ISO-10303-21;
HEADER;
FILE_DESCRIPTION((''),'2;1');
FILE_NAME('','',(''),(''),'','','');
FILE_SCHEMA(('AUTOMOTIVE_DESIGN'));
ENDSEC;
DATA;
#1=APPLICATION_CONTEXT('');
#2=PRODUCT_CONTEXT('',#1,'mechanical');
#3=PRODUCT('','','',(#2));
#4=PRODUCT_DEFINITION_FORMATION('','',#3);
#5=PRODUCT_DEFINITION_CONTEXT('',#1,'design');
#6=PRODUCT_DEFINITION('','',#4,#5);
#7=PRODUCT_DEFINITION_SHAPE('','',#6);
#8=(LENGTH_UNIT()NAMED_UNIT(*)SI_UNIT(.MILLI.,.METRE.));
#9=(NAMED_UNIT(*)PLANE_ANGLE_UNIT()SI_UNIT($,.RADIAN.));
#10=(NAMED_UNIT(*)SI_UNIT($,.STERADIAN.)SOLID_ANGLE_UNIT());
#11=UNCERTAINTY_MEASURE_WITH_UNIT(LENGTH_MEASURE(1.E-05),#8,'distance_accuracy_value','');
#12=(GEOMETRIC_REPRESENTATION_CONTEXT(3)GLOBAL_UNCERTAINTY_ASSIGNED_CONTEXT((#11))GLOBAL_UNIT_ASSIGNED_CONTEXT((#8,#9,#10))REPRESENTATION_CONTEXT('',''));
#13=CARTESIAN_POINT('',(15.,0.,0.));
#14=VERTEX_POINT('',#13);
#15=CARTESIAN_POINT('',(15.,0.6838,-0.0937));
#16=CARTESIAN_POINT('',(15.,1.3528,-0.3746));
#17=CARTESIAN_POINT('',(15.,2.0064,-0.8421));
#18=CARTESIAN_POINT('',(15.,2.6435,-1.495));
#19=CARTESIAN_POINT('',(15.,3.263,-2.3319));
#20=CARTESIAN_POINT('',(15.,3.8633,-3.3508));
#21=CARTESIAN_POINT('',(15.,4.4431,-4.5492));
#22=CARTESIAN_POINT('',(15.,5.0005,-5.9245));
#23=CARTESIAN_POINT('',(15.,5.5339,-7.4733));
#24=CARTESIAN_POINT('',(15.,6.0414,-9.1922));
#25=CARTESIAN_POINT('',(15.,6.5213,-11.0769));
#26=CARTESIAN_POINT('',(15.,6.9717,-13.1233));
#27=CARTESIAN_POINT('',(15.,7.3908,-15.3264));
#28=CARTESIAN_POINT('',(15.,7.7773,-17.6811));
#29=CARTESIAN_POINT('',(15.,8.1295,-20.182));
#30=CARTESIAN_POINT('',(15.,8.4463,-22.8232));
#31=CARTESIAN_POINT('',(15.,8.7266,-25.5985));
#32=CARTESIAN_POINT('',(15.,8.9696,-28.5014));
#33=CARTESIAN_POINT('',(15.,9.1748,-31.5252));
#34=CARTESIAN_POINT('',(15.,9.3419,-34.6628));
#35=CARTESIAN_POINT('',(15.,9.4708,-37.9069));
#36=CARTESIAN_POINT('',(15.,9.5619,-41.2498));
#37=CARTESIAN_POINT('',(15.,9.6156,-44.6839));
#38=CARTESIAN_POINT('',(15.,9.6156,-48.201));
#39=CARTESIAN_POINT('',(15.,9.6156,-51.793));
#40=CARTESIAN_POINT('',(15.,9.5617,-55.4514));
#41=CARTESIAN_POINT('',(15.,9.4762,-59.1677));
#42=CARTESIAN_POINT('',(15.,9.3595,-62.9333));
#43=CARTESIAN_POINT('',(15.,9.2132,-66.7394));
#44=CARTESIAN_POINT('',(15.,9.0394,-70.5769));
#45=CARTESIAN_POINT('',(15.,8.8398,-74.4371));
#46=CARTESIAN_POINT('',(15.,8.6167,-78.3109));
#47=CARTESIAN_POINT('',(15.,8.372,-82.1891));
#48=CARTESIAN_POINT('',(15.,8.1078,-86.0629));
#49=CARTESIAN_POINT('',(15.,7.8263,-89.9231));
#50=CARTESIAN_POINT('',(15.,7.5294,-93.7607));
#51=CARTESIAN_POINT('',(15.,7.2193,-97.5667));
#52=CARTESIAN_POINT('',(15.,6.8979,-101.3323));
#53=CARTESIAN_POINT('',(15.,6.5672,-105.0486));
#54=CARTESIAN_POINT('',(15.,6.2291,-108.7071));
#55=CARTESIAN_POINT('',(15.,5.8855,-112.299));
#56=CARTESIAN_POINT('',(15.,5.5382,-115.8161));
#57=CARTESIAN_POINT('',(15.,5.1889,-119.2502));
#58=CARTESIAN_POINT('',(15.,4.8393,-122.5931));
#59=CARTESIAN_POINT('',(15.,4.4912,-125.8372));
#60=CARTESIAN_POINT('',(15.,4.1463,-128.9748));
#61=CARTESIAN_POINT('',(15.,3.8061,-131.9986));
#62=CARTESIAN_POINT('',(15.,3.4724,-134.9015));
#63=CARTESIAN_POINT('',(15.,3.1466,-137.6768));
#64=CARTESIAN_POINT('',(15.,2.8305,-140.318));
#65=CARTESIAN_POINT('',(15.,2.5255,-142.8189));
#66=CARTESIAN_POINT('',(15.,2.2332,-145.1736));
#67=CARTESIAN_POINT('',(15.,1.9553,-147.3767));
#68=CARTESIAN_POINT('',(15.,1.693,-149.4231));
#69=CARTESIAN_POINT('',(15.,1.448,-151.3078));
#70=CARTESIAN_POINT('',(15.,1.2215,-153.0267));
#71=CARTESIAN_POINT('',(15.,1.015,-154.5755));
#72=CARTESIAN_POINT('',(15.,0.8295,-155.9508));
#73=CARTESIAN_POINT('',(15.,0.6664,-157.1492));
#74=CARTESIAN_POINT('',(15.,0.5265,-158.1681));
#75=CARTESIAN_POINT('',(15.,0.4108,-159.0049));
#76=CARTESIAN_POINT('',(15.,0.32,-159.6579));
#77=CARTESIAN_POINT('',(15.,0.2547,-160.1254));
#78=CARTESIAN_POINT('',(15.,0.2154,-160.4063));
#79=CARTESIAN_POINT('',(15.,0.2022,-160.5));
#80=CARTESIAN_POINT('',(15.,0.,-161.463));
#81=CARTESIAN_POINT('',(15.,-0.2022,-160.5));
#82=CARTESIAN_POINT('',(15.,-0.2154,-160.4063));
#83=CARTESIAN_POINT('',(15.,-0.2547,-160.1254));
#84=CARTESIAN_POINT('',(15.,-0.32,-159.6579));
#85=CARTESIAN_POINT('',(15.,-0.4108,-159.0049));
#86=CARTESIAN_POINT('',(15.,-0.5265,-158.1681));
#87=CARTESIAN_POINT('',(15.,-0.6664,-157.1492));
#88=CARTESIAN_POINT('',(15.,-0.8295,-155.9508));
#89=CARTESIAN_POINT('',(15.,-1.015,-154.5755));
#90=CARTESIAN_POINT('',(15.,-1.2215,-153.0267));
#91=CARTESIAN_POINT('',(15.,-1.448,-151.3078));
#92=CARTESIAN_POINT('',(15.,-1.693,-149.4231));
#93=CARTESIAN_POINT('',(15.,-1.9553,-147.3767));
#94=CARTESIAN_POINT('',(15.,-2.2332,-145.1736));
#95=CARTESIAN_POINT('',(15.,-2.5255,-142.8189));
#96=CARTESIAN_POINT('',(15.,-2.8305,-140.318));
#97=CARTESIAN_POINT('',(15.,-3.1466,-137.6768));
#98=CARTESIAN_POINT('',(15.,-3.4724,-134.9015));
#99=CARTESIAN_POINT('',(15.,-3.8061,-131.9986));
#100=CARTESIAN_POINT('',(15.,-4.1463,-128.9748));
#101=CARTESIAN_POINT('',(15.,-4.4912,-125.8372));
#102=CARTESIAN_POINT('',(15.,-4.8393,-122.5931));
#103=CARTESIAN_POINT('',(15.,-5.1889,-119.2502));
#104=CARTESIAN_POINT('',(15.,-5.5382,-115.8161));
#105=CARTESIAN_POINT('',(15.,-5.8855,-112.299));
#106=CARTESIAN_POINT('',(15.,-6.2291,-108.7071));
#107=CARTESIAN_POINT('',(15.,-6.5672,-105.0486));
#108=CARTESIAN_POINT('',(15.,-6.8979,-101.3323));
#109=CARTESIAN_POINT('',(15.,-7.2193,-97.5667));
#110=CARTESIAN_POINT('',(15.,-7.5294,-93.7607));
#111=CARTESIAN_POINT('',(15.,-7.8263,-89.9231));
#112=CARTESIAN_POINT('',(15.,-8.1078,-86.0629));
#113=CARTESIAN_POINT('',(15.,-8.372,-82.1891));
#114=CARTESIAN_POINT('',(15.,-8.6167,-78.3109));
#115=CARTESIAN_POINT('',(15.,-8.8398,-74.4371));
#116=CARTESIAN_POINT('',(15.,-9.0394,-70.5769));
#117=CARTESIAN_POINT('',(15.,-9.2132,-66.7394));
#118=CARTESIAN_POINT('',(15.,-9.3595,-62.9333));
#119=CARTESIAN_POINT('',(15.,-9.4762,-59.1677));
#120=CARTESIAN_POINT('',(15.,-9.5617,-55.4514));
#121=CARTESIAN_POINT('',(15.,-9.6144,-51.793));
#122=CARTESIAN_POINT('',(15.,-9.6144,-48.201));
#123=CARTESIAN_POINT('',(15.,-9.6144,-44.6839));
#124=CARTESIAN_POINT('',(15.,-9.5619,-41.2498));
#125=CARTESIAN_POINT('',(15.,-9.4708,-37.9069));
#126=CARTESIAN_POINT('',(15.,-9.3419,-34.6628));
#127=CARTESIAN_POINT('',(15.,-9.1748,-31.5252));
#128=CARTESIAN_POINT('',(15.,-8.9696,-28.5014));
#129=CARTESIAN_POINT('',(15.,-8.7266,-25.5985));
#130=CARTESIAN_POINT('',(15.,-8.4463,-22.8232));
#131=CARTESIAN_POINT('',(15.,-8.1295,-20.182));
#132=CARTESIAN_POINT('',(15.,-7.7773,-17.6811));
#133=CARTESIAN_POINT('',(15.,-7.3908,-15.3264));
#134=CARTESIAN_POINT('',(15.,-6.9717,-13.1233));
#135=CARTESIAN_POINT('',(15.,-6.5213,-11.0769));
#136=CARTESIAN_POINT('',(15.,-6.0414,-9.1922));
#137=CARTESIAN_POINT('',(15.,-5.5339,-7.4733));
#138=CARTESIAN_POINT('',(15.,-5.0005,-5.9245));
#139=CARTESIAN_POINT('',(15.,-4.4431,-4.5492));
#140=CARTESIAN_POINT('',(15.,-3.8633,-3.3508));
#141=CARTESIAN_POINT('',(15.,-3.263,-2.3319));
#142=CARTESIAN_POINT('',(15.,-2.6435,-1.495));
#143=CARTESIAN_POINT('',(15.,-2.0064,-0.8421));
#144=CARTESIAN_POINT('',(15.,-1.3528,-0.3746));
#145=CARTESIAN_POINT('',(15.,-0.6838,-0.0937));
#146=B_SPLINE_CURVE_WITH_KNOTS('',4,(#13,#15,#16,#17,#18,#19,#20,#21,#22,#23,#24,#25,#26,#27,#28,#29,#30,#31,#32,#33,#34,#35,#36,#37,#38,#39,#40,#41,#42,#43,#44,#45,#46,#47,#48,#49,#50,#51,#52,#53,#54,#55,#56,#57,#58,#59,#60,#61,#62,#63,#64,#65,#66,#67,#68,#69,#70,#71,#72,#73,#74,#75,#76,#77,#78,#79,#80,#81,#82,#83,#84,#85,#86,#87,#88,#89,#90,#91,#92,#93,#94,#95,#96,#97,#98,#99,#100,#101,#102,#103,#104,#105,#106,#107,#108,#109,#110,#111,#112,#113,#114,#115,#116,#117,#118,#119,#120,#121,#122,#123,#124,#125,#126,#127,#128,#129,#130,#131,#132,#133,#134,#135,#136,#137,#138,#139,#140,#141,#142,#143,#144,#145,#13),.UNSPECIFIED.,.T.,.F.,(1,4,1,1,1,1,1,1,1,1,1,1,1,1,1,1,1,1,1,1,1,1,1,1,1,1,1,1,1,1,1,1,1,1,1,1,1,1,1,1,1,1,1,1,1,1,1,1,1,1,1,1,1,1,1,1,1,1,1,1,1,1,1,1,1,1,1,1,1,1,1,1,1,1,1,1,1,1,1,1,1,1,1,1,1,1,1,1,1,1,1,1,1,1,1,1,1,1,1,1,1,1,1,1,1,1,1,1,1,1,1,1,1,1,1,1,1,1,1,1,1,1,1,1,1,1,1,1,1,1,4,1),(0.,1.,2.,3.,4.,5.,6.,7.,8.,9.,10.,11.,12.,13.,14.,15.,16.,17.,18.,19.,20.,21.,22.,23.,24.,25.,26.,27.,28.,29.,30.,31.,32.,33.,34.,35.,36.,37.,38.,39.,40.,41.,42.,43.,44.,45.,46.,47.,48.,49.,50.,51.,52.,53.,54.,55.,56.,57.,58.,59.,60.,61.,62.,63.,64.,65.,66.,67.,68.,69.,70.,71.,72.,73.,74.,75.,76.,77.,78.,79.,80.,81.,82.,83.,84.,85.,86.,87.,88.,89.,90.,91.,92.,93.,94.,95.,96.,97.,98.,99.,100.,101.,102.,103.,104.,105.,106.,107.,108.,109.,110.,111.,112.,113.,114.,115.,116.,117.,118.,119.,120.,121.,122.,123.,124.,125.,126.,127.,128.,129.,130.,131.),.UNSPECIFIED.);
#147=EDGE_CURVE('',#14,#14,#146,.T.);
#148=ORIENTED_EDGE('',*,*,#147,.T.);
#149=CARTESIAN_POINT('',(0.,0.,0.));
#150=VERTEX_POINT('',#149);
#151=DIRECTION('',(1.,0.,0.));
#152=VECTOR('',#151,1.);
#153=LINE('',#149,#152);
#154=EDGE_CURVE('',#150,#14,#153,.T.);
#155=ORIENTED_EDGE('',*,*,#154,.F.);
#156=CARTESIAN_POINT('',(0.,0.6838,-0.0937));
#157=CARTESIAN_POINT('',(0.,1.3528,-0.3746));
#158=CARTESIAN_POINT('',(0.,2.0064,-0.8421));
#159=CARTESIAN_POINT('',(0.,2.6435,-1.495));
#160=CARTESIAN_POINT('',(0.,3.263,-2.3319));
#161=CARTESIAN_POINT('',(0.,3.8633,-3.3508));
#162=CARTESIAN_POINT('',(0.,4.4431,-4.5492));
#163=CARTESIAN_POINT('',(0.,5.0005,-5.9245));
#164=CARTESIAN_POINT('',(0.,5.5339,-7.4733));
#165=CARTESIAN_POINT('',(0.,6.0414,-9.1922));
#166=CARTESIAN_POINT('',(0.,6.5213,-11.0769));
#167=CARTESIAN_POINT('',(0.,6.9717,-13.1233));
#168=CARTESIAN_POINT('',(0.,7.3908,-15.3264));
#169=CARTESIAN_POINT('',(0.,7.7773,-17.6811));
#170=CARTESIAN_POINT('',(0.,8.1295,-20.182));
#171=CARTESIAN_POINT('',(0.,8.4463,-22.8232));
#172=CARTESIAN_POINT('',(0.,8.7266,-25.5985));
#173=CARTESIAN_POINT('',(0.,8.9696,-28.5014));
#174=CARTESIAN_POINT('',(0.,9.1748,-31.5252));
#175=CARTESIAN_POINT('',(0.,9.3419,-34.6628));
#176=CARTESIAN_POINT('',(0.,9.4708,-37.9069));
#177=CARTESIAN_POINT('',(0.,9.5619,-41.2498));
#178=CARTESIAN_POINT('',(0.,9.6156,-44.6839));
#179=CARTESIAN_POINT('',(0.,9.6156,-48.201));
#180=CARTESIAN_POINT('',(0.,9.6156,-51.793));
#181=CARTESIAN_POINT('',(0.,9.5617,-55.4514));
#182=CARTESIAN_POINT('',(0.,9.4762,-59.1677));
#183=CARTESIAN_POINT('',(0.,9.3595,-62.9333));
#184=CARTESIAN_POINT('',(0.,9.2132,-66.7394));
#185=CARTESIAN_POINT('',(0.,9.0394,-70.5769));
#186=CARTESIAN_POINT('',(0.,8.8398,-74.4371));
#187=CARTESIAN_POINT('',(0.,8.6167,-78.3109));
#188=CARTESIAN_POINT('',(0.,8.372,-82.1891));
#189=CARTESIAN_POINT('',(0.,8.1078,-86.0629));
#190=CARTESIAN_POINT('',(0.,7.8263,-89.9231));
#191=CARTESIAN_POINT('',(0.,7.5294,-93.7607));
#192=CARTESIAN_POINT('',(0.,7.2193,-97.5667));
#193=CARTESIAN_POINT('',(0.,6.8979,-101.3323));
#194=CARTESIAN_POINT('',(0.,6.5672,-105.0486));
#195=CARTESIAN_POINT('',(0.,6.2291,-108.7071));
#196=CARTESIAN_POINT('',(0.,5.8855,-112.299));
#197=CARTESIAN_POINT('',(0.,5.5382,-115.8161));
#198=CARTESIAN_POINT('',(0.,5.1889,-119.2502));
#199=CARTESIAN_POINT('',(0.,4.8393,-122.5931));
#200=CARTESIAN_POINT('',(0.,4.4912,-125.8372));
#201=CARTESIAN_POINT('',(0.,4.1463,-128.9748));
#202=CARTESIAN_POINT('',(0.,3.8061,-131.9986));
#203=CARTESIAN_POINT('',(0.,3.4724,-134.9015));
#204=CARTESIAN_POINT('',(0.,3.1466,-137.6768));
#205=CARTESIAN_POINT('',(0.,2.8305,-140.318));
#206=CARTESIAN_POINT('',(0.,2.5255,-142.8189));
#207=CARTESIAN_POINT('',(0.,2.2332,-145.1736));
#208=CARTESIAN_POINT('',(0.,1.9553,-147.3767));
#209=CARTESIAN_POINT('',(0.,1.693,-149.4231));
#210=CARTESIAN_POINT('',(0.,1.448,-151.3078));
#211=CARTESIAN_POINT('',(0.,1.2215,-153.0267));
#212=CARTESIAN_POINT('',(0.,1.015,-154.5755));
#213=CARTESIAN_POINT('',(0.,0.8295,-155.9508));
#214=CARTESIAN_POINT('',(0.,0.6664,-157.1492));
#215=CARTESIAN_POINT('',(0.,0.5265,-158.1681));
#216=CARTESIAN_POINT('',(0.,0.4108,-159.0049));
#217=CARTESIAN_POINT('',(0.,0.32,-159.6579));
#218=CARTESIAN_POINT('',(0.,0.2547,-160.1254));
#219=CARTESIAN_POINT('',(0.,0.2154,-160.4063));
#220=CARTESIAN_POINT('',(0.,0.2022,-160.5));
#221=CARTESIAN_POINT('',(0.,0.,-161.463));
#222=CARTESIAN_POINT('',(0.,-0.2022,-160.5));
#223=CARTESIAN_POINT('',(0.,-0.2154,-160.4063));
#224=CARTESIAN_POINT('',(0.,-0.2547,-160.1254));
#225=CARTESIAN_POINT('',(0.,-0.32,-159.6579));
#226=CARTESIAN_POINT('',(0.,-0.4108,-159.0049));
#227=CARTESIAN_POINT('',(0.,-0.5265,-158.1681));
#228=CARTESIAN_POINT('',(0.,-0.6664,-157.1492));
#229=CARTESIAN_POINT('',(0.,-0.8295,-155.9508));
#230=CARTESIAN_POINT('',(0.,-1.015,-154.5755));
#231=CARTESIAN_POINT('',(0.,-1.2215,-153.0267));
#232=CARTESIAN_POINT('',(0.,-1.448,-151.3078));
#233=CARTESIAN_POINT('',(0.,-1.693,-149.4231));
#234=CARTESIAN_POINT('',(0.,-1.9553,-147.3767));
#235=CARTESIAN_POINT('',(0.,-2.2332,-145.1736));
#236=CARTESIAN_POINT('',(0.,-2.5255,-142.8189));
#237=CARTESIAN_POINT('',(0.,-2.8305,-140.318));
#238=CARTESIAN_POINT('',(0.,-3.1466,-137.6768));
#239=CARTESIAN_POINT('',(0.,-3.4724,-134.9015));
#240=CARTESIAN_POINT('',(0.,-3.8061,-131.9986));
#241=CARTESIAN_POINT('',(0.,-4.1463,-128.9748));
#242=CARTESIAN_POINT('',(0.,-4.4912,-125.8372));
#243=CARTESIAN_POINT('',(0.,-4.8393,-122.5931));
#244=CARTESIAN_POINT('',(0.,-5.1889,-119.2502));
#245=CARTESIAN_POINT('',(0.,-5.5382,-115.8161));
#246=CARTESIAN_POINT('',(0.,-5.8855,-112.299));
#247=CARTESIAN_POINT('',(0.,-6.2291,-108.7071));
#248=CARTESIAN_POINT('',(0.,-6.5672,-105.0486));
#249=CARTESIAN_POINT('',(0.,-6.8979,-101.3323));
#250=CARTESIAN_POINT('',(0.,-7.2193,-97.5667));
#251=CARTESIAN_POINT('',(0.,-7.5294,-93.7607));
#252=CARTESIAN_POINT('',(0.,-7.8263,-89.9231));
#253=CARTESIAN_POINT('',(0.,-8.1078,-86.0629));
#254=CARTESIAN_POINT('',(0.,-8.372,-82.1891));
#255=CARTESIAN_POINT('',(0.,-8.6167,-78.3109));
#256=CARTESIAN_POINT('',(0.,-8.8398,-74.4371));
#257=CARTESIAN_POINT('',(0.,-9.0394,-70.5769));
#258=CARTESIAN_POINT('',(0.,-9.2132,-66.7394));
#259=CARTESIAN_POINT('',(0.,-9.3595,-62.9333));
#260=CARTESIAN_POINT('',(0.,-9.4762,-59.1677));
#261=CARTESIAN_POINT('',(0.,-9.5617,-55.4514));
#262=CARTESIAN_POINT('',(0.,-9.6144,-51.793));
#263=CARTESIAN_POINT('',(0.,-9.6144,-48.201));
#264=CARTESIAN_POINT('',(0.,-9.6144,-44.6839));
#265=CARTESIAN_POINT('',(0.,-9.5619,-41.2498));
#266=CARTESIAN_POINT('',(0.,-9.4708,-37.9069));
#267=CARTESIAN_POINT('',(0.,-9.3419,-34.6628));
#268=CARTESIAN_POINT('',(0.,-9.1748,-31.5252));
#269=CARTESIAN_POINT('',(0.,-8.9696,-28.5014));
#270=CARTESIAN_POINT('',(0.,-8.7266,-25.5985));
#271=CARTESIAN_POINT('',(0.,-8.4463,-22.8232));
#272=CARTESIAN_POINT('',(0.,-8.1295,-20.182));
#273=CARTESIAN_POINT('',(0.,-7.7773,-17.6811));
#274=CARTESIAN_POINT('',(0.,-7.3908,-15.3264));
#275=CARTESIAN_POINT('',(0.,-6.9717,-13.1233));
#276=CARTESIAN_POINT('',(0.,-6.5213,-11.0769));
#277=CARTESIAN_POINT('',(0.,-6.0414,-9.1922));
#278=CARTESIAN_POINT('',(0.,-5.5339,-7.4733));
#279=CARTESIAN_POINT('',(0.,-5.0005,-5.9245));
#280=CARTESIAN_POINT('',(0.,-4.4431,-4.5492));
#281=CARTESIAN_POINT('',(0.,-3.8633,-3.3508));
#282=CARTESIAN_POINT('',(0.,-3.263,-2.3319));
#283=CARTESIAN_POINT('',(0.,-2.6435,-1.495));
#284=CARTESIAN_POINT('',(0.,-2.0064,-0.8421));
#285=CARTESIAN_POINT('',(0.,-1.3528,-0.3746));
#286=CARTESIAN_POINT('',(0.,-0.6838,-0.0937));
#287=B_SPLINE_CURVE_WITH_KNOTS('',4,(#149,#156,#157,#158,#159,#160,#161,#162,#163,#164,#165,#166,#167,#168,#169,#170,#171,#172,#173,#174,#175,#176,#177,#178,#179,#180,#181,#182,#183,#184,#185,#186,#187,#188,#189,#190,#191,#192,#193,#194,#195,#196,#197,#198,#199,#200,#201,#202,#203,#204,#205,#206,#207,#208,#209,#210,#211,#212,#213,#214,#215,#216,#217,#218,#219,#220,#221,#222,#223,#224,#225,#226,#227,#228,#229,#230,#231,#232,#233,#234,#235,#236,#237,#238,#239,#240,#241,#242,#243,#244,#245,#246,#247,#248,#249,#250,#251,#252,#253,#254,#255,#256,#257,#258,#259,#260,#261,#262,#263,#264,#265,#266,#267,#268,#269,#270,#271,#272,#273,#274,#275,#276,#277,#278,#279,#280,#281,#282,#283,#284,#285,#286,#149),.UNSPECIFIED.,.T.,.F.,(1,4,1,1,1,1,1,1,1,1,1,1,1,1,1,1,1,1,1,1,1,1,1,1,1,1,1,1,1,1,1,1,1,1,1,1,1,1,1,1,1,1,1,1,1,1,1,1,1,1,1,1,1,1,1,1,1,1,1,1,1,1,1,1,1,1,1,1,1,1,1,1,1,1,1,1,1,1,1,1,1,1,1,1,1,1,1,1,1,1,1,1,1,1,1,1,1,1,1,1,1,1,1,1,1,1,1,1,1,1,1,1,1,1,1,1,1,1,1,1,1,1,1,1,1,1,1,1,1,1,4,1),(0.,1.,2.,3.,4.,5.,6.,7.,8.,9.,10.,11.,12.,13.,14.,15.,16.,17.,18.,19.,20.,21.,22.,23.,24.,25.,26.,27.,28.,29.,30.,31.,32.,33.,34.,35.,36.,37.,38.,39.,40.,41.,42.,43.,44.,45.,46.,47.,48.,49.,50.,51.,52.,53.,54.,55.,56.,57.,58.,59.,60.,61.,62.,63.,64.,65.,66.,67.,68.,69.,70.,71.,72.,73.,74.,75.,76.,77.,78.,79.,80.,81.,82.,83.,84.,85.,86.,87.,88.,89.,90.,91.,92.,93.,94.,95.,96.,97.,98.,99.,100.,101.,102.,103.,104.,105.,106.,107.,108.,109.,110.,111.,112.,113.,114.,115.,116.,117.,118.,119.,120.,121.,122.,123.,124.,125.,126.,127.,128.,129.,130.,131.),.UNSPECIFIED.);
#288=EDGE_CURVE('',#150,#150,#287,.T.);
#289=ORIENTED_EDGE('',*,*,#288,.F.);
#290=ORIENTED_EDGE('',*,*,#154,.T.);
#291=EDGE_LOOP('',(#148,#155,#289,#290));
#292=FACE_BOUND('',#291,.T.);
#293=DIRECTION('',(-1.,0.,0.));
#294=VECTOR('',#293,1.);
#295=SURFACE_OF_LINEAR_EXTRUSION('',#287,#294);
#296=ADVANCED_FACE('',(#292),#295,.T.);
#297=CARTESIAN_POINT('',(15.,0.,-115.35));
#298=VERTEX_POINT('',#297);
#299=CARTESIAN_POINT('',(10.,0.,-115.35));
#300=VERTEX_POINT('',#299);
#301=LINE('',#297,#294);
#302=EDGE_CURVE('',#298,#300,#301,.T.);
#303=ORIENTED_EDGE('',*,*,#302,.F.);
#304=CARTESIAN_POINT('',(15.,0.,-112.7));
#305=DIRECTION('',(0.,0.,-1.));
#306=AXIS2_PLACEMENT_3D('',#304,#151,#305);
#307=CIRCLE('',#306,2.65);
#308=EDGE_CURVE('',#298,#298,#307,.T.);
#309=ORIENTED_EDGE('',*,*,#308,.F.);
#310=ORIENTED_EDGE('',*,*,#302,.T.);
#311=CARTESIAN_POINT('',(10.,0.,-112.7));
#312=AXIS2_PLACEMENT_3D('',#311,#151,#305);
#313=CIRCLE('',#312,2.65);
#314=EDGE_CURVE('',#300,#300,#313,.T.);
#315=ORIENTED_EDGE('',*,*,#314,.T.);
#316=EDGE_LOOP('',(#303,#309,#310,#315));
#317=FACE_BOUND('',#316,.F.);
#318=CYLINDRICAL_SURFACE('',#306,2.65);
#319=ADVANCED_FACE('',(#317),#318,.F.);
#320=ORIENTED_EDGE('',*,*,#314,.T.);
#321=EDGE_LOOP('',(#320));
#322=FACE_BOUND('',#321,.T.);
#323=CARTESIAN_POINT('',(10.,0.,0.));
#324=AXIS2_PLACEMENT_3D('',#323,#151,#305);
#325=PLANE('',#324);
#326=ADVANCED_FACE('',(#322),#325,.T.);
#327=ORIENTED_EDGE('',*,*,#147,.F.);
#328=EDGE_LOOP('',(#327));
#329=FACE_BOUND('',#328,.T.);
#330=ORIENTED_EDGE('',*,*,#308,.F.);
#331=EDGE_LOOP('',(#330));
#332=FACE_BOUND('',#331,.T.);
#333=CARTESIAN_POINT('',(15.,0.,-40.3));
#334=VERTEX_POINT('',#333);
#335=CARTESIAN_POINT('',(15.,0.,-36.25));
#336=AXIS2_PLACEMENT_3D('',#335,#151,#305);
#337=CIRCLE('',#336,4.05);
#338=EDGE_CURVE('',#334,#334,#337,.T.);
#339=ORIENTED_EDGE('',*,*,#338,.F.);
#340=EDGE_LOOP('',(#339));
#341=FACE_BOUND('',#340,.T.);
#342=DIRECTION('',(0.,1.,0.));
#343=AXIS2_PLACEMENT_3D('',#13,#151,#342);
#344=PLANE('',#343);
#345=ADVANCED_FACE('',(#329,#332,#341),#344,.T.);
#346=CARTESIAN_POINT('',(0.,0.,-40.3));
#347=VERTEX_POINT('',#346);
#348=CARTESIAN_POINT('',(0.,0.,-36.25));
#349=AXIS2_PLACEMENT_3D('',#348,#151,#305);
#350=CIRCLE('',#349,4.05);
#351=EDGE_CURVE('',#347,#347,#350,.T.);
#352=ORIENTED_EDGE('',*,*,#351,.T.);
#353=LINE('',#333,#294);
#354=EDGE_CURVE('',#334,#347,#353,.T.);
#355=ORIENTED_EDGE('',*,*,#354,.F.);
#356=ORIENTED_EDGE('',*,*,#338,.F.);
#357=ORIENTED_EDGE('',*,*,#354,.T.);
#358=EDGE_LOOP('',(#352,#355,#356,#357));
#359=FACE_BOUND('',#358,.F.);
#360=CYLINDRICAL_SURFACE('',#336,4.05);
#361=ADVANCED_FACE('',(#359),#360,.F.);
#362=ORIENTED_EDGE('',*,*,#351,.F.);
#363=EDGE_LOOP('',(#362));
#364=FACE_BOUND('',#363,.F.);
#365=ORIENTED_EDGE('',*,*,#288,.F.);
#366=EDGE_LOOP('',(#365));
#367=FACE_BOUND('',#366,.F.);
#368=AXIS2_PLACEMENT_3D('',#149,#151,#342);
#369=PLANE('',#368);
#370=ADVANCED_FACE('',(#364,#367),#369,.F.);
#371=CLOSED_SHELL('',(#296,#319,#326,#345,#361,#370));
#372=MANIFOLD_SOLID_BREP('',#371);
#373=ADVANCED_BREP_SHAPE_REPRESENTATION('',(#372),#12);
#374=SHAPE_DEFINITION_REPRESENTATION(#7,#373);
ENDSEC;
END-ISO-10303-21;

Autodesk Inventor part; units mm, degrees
ref_plane "YZ Plane" through (0, 0, 0) normal (1, 0, 0) x (0, 1, 0)
ref_plane "XZ Plane" through (0, 0, 0) normal (0, 1, 0) x (-1, 0, 0)
ref_plane "XY Plane" through (0, 0, 0) normal (0, 0, 1) x (1, 0, 0)
sketch "Sketch9" plane through (0, 0, 0) normal (1, 0, 0) x (0, 1, 0)
  line L0 (0, 0) -> (0.6838, -0.0937) construction
  line L1 (0.6838, -0.0937) -> (1.3528, -0.3746) construction
  line L2 (1.3528, -0.3746) -> (2.0064, -0.8421) construction
  line L3 (2.0064, -0.8421) -> (2.6435, -1.495) construction
  line L4 (2.6435, -1.495) -> (3.263, -2.3319) construction
  line L5 (3.263, -2.3319) -> (3.8633, -3.3508) construction
  line L6 (3.8633, -3.3508) -> (4.4431, -4.5492) construction
  line L7 (4.4431, -4.5492) -> (5.0005, -5.9245) construction
  line L8 (5.0005, -5.9245) -> (5.5339, -7.4733) construction
  line L9 (5.5339, -7.4733) -> (6.0414, -9.1922) construction
  line L10 (6.0414, -9.1922) -> (6.5213, -11.0769) construction
  line L11 (6.5213, -11.0769) -> (6.9717, -13.1233) construction
  line L12 (6.9717, -13.1233) -> (7.3908, -15.3264) construction
  line L13 (7.3908, -15.3264) -> (7.7773, -17.6811) construction
  line L14 (7.7773, -17.6811) -> (8.1295, -20.182) construction
  line L15 (8.1295, -20.182) -> (8.4463, -22.8232) construction
  line L16 (8.4463, -22.8232) -> (8.7266, -25.5985) construction
  line L17 (8.7266, -25.5985) -> (8.9696, -28.5014) construction
  line L18 (8.9696, -28.5014) -> (9.1748, -31.5252) construction
  line L19 (9.1748, -31.5252) -> (9.3419, -34.6628) construction
  line L20 (9.3419, -34.6628) -> (9.4708, -37.9069) construction
  line L21 (9.4708, -37.9069) -> (9.5619, -41.2498) construction
  line L22 (9.5619, -41.2498) -> (9.6156, -44.6839) construction
  line L23 (9.6156, -44.6839) -> (9.6156, -48.201) construction
  line L24 (9.6156, -48.201) -> (9.6156, -51.793) construction
  line L25 (9.6156, -51.793) -> (9.5617, -55.4514) construction
  line L26 (9.5617, -55.4514) -> (9.4762, -59.1677) construction
  line L27 (9.4762, -59.1677) -> (9.3595, -62.9333) construction
  line L28 (9.3595, -62.9333) -> (9.2132, -66.7394) construction
  line L29 (9.2132, -66.7394) -> (9.0394, -70.5769) construction
  line L30 (9.0394, -70.5769) -> (8.8398, -74.4371) construction
  line L31 (8.8398, -74.4371) -> (8.6167, -78.3109) construction
  line L32 (8.6167, -78.3109) -> (8.372, -82.1891) construction
  line L33 (8.372, -82.1891) -> (8.1078, -86.0629) construction
  line L34 (8.1078, -86.0629) -> (7.8263, -89.9231) construction
  line L35 (7.8263, -89.9231) -> (7.5294, -93.7607) construction
  line L36 (7.5294, -93.7607) -> (7.2193, -97.5667) construction
  line L37 (7.2193, -97.5667) -> (6.8979, -101.3323) construction
  line L38 (6.8979, -101.3323) -> (6.5672, -105.0486) construction
  line L39 (6.5672, -105.0486) -> (6.2291, -108.7071) construction
  line L40 (6.2291, -108.7071) -> (5.8855, -112.299) construction
  line L41 (5.8855, -112.299) -> (5.5382, -115.8161) construction
  line L42 (5.5382, -115.8161) -> (5.1889, -119.2502) construction
  line L43 (5.1889, -119.2502) -> (4.8393, -122.5931) construction
  line L44 (4.8393, -122.5931) -> (4.4912, -125.8372) construction
  line L45 (4.4912, -125.8372) -> (4.1463, -128.9748) construction
  line L46 (4.1463, -128.9748) -> (3.8061, -131.9986) construction
  line L47 (3.8061, -131.9986) -> (3.4724, -134.9015) construction
  line L48 (3.4724, -134.9015) -> (3.1466, -137.6768) construction
  line L49 (3.1466, -137.6768) -> (2.8305, -140.318) construction
  line L50 (2.8305, -140.318) -> (2.5255, -142.8189) construction
  line L51 (2.5255, -142.8189) -> (2.2332, -145.1736) construction
  line L52 (2.2332, -145.1736) -> (1.9553, -147.3767) construction
  line L53 (1.9553, -147.3767) -> (1.693, -149.4231) construction
  line L54 (1.693, -149.4231) -> (1.448, -151.3078) construction
  line L55 (1.448, -151.3078) -> (1.2215, -153.0267) construction
  line L56 (1.2215, -153.0267) -> (1.015, -154.5755) construction
  line L57 (1.015, -154.5755) -> (0.8295, -155.9508) construction
  line L58 (0.8295, -155.9508) -> (0.6664, -157.1492) construction
  line L59 (0.6664, -157.1492) -> (0.5265, -158.1681) construction
  line L60 (0.5265, -158.1681) -> (0.4108, -159.0049) construction
  line L61 (0.4108, -159.0049) -> (0.32, -159.6579) construction
  line L62 (0.32, -159.6579) -> (0.2547, -160.1254) construction
  line L63 (0.2547, -160.1254) -> (0.2154, -160.4063) construction
  line L64 (0.2154, -160.4063) -> (0.2022, -160.5) construction
  line L65 (0.2022, -160.5) -> (0, -161.463) construction
  line L66 (0, -161.463) -> (-0.2022, -160.5) construction
  line L67 (-0.2022, -160.5) -> (-0.2154, -160.4063) construction
  line L68 (-0.2154, -160.4063) -> (-0.2547, -160.1254) construction
  line L69 (-0.2547, -160.1254) -> (-0.32, -159.6579) construction
  line L70 (-0.32, -159.6579) -> (-0.4108, -159.0049) construction
  line L71 (-0.4108, -159.0049) -> (-0.5265, -158.1681) construction
  line L72 (-0.5265, -158.1681) -> (-0.6664, -157.1492) construction
  line L73 (-0.6664, -157.1492) -> (-0.8295, -155.9508) construction
  line L74 (-0.8295, -155.9508) -> (-1.015, -154.5755) construction
  line L75 (-1.015, -154.5755) -> (-1.2215, -153.0267) construction
  line L76 (-1.2215, -153.0267) -> (-1.448, -151.3078) construction
  line L77 (-1.448, -151.3078) -> (-1.693, -149.4231) construction
  line L78 (-1.693, -149.4231) -> (-1.9553, -147.3767) construction
  line L79 (-1.9553, -147.3767) -> (-2.2332, -145.1736) construction
  line L80 (-2.2332, -145.1736) -> (-2.5255, -142.8189) construction
  line L81 (-2.5255, -142.8189) -> (-2.8305, -140.318) construction
  line L82 (-2.8305, -140.318) -> (-3.1466, -137.6768) construction
  line L83 (-3.1466, -137.6768) -> (-3.4724, -134.9015) construction
  line L84 (-3.4724, -134.9015) -> (-3.8061, -131.9986) construction
  line L85 (-3.8061, -131.9986) -> (-4.1463, -128.9748) construction
  line L86 (-4.1463, -128.9748) -> (-4.4912, -125.8372) construction
  line L87 (-4.4912, -125.8372) -> (-4.8393, -122.5931) construction
  line L88 (-4.8393, -122.5931) -> (-5.1889, -119.2502) construction
  line L89 (-5.1889, -119.2502) -> (-5.5382, -115.8161) construction
  line L90 (-5.5382, -115.8161) -> (-5.8855, -112.299) construction
  line L91 (-5.8855, -112.299) -> (-6.2291, -108.7071) construction
  line L92 (-6.2291, -108.7071) -> (-6.5672, -105.0486) construction
  line L93 (-6.5672, -105.0486) -> (-6.8979, -101.3323) construction
  line L94 (-6.8979, -101.3323) -> (-7.2193, -97.5667) construction
  line L95 (-7.2193, -97.5667) -> (-7.5294, -93.7607) construction
  line L96 (-7.5294, -93.7607) -> (-7.8263, -89.9231) construction
  line L97 (-7.8263, -89.9231) -> (-8.1078, -86.0629) construction
  line L98 (-8.1078, -86.0629) -> (-8.372, -82.1891) construction
  line L99 (-8.372, -82.1891) -> (-8.6167, -78.3109) construction
  line L100 (-8.6167, -78.3109) -> (-8.8398, -74.4371) construction
  line L101 (-8.8398, -74.4371) -> (-9.0394, -70.5769) construction
  line L102 (-9.0394, -70.5769) -> (-9.2132, -66.7394) construction
  line L103 (-9.2132, -66.7394) -> (-9.3595, -62.9333) construction
  line L104 (-9.3595, -62.9333) -> (-9.4762, -59.1677) construction
  line L105 (-9.4762, -59.1677) -> (-9.5617, -55.4514) construction
  line L106 (-9.5617, -55.4514) -> (-9.6144, -51.793) construction
  line L107 (-9.6144, -51.793) -> (-9.6144, -48.201) construction
  line L108 (-9.6144, -48.201) -> (-9.6144, -44.6839) construction
  line L109 (-9.6144, -44.6839) -> (-9.5619, -41.2498) construction
  line L110 (-9.5619, -41.2498) -> (-9.4708, -37.9069) construction
  line L111 (-9.4708, -37.9069) -> (-9.3419, -34.6628) construction
  line L112 (-9.3419, -34.6628) -> (-9.1748, -31.5252) construction
  line L113 (-9.1748, -31.5252) -> (-8.9696, -28.5014) construction
  line L114 (-8.9696, -28.5014) -> (-8.7266, -25.5985) construction
  line L115 (-8.7266, -25.5985) -> (-8.4463, -22.8232) construction
  line L116 (-8.4463, -22.8232) -> (-8.1295, -20.182) construction
  line L117 (-8.1295, -20.182) -> (-7.7773, -17.6811) construction
  line L118 (-7.7773, -17.6811) -> (-7.3908, -15.3264) construction
  line L119 (-7.3908, -15.3264) -> (-6.9717, -13.1233) construction
  line L120 (-6.9717, -13.1233) -> (-6.5213, -11.0769) construction
  line L121 (-6.5213, -11.0769) -> (-6.0414, -9.1922) construction
  line L122 (-6.0414, -9.1922) -> (-5.5339, -7.4733) construction
  line L123 (-5.5339, -7.4733) -> (-5.0005, -5.9245) construction
  line L124 (-5.0005, -5.9245) -> (-4.4431, -4.5492) construction
  line L125 (-4.4431, -4.5492) -> (-3.8633, -3.3508) construction
  line L126 (-3.8633, -3.3508) -> (-3.263, -2.3319) construction
  line L127 (-3.263, -2.3319) -> (-2.6435, -1.495) construction
  line L128 (-2.6435, -1.495) -> (-2.0064, -0.8421) construction
  line L129 (-2.0064, -0.8421) -> (-1.3528, -0.3746) construction
  line L130 (-1.3528, -0.3746) -> (-0.6838, -0.0937) construction
  line L131 (-0.6838, -0.0937) -> (0, 0) construction
  spline S0 degree 4 poles (0, 0) (0.6838, -0.0937) (1.3528, -0.3746) (2.0064, -0.8421) (2.6435, -1.495) (3.263, -2.3319) (3.8633, -3.3508) (4.4431, -4.5492) (5.0005, -5.9245) (5.5339, -7.4733) (6.0414, -9.1922) (6.5213, -11.0769) (6.9717, -13.1233) (7.3908, -15.3264) (7.7773, -17.6811) (8.1295, -20.182) (8.4463, -22.8232) (8.7266, -25.5985) (8.9696, -28.5014) (9.1748, -31.5252) (9.3419, -34.6628) (9.4708, -37.9069) (9.5619, -41.2498) (9.6156, -44.6839) (9.6156, -48.201) (9.6156, -51.793) (9.5617, -55.4514) (9.4762, -59.1677) (9.3595, -62.9333) (9.2132, -66.7394) (9.0394, -70.5769) (8.8398, -74.4371) (8.6167, -78.3109) (8.372, -82.1891) (8.1078, -86.0629) (7.8263, -89.9231) (7.5294, -93.7607) (7.2193, -97.5667) (6.8979, -101.3323) (6.5672, -105.0486) (6.2291, -108.7071) (5.8855, -112.299) (5.5382, -115.8161) (5.1889, -119.2502) (4.8393, -122.5931) (4.4912, -125.8372) (4.1463, -128.9748) (3.8061, -131.9986) (3.4724, -134.9015) (3.1466, -137.6768) (2.8305, -140.318) (2.5255, -142.8189) (2.2332, -145.1736) (1.9553, -147.3767) (1.693, -149.4231) (1.448, -151.3078) (1.2215, -153.0267) (1.015, -154.5755) (0.8295, -155.9508) (0.6664, -157.1492) (0.5265, -158.1681) (0.4108, -159.0049) (0.32, -159.6579) (0.2547, -160.1254) (0.2154, -160.4063) (0.2022, -160.5) (0, -161.463) (-0.2022, -160.5) (-0.2154, -160.4063) (-0.2547, -160.1254) (-0.32, -159.6579) (-0.4108, -159.0049) (-0.5265, -158.1681) (-0.6664, -157.1492) (-0.8295, -155.9508) (-1.015, -154.5755) (-1.2215, -153.0267) (-1.448, -151.3078) (-1.693, -149.4231) (-1.9553, -147.3767) (-2.2332, -145.1736) (-2.5255, -142.8189) (-2.8305, -140.318) (-3.1466, -137.6768) (-3.4724, -134.9015) (-3.8061, -131.9986) (-4.1463, -128.9748) (-4.4912, -125.8372) (-4.8393, -122.5931) (-5.1889, -119.2502) (-5.5382, -115.8161) (-5.8855, -112.299) (-6.2291, -108.7071) (-6.5672, -105.0486) (-6.8979, -101.3323) (-7.2193, -97.5667) (-7.5294, -93.7607) (-7.8263, -89.9231) (-8.1078, -86.0629) (-8.372, -82.1891) (-8.6167, -78.3109) (-8.8398, -74.4371) (-9.0394, -70.5769) (-9.2132, -66.7394) (-9.3595, -62.9333) (-9.4762, -59.1677) (-9.5617, -55.4514) (-9.6144, -51.793) (-9.6144, -48.201) (-9.6144, -44.6839) (-9.5619, -41.2498) (-9.4708, -37.9069) (-9.3419, -34.6628) (-9.1748, -31.5252) (-8.9696, -28.5014) (-8.7266, -25.5985) (-8.4463, -22.8232) (-8.1295, -20.182) (-7.7773, -17.6811) (-7.3908, -15.3264) (-6.9717, -13.1233) (-6.5213, -11.0769) (-6.0414, -9.1922) (-5.5339, -7.4733) (-5.0005, -5.9245) (-4.4431, -4.5492) (-3.8633, -3.3508) (-3.263, -2.3319) (-2.6435, -1.495) (-2.0064, -0.8421) (-1.3528, -0.3746) (-0.6838, -0.0937) (0, 0) knots 1 1 1 1 1 2 3 4 5 6 7 8 9 10 11 12 13 14 15 16 17 18 19 20 21 22 23 24 25 26 27 28 29 30 31 32 33 34 35 36 37 38 39 40 41 42 43 44 45 46 47 48 49 50 51 52 53 54 55 56 57 58 59 60 61 62 63 64 65 66 67 68 69 70 71 72 73 74 75 76 77 78 79 80 81 82 83 84 85 86 87 88 89 90 91 92 93 94 95 96 97 98 99 100 101 102 103 104 105 106 107 108 109 110 111 112 113 114 115 116 117 118 119 120 121 122 123 124 125 126 127 128 129 130 130 130 130 130
extrude "Extrusion3" add sketch "Sketch9" along normal blind 15
sketch "Sketch10" plane through (15, 0, 0) normal (1, 0, 0) x (0, 0, -1)
  circle A0 centre (36.25, 0) radius 4.05
  point P0 (0, 0)
  dimension "d88" = 8.1
  dimension "d89" = 36.25
extrude "Extrusion4" cut sketch "Sketch10" against normal blind 15
sketch "Sketch11" plane through (15, 0, 0) normal (1, 0, 0) x (0, 0, -1)
  circle A0 centre (112.7, 0) radius 2.65
  point P0 (0, 0)
  dimension "d93" = 5.3
  dimension "d94" = 112.7
extrude "Extrusion5" cut sketch "Sketch11" against normal blind 5
properties part number "6P-09" material "Poplar"
